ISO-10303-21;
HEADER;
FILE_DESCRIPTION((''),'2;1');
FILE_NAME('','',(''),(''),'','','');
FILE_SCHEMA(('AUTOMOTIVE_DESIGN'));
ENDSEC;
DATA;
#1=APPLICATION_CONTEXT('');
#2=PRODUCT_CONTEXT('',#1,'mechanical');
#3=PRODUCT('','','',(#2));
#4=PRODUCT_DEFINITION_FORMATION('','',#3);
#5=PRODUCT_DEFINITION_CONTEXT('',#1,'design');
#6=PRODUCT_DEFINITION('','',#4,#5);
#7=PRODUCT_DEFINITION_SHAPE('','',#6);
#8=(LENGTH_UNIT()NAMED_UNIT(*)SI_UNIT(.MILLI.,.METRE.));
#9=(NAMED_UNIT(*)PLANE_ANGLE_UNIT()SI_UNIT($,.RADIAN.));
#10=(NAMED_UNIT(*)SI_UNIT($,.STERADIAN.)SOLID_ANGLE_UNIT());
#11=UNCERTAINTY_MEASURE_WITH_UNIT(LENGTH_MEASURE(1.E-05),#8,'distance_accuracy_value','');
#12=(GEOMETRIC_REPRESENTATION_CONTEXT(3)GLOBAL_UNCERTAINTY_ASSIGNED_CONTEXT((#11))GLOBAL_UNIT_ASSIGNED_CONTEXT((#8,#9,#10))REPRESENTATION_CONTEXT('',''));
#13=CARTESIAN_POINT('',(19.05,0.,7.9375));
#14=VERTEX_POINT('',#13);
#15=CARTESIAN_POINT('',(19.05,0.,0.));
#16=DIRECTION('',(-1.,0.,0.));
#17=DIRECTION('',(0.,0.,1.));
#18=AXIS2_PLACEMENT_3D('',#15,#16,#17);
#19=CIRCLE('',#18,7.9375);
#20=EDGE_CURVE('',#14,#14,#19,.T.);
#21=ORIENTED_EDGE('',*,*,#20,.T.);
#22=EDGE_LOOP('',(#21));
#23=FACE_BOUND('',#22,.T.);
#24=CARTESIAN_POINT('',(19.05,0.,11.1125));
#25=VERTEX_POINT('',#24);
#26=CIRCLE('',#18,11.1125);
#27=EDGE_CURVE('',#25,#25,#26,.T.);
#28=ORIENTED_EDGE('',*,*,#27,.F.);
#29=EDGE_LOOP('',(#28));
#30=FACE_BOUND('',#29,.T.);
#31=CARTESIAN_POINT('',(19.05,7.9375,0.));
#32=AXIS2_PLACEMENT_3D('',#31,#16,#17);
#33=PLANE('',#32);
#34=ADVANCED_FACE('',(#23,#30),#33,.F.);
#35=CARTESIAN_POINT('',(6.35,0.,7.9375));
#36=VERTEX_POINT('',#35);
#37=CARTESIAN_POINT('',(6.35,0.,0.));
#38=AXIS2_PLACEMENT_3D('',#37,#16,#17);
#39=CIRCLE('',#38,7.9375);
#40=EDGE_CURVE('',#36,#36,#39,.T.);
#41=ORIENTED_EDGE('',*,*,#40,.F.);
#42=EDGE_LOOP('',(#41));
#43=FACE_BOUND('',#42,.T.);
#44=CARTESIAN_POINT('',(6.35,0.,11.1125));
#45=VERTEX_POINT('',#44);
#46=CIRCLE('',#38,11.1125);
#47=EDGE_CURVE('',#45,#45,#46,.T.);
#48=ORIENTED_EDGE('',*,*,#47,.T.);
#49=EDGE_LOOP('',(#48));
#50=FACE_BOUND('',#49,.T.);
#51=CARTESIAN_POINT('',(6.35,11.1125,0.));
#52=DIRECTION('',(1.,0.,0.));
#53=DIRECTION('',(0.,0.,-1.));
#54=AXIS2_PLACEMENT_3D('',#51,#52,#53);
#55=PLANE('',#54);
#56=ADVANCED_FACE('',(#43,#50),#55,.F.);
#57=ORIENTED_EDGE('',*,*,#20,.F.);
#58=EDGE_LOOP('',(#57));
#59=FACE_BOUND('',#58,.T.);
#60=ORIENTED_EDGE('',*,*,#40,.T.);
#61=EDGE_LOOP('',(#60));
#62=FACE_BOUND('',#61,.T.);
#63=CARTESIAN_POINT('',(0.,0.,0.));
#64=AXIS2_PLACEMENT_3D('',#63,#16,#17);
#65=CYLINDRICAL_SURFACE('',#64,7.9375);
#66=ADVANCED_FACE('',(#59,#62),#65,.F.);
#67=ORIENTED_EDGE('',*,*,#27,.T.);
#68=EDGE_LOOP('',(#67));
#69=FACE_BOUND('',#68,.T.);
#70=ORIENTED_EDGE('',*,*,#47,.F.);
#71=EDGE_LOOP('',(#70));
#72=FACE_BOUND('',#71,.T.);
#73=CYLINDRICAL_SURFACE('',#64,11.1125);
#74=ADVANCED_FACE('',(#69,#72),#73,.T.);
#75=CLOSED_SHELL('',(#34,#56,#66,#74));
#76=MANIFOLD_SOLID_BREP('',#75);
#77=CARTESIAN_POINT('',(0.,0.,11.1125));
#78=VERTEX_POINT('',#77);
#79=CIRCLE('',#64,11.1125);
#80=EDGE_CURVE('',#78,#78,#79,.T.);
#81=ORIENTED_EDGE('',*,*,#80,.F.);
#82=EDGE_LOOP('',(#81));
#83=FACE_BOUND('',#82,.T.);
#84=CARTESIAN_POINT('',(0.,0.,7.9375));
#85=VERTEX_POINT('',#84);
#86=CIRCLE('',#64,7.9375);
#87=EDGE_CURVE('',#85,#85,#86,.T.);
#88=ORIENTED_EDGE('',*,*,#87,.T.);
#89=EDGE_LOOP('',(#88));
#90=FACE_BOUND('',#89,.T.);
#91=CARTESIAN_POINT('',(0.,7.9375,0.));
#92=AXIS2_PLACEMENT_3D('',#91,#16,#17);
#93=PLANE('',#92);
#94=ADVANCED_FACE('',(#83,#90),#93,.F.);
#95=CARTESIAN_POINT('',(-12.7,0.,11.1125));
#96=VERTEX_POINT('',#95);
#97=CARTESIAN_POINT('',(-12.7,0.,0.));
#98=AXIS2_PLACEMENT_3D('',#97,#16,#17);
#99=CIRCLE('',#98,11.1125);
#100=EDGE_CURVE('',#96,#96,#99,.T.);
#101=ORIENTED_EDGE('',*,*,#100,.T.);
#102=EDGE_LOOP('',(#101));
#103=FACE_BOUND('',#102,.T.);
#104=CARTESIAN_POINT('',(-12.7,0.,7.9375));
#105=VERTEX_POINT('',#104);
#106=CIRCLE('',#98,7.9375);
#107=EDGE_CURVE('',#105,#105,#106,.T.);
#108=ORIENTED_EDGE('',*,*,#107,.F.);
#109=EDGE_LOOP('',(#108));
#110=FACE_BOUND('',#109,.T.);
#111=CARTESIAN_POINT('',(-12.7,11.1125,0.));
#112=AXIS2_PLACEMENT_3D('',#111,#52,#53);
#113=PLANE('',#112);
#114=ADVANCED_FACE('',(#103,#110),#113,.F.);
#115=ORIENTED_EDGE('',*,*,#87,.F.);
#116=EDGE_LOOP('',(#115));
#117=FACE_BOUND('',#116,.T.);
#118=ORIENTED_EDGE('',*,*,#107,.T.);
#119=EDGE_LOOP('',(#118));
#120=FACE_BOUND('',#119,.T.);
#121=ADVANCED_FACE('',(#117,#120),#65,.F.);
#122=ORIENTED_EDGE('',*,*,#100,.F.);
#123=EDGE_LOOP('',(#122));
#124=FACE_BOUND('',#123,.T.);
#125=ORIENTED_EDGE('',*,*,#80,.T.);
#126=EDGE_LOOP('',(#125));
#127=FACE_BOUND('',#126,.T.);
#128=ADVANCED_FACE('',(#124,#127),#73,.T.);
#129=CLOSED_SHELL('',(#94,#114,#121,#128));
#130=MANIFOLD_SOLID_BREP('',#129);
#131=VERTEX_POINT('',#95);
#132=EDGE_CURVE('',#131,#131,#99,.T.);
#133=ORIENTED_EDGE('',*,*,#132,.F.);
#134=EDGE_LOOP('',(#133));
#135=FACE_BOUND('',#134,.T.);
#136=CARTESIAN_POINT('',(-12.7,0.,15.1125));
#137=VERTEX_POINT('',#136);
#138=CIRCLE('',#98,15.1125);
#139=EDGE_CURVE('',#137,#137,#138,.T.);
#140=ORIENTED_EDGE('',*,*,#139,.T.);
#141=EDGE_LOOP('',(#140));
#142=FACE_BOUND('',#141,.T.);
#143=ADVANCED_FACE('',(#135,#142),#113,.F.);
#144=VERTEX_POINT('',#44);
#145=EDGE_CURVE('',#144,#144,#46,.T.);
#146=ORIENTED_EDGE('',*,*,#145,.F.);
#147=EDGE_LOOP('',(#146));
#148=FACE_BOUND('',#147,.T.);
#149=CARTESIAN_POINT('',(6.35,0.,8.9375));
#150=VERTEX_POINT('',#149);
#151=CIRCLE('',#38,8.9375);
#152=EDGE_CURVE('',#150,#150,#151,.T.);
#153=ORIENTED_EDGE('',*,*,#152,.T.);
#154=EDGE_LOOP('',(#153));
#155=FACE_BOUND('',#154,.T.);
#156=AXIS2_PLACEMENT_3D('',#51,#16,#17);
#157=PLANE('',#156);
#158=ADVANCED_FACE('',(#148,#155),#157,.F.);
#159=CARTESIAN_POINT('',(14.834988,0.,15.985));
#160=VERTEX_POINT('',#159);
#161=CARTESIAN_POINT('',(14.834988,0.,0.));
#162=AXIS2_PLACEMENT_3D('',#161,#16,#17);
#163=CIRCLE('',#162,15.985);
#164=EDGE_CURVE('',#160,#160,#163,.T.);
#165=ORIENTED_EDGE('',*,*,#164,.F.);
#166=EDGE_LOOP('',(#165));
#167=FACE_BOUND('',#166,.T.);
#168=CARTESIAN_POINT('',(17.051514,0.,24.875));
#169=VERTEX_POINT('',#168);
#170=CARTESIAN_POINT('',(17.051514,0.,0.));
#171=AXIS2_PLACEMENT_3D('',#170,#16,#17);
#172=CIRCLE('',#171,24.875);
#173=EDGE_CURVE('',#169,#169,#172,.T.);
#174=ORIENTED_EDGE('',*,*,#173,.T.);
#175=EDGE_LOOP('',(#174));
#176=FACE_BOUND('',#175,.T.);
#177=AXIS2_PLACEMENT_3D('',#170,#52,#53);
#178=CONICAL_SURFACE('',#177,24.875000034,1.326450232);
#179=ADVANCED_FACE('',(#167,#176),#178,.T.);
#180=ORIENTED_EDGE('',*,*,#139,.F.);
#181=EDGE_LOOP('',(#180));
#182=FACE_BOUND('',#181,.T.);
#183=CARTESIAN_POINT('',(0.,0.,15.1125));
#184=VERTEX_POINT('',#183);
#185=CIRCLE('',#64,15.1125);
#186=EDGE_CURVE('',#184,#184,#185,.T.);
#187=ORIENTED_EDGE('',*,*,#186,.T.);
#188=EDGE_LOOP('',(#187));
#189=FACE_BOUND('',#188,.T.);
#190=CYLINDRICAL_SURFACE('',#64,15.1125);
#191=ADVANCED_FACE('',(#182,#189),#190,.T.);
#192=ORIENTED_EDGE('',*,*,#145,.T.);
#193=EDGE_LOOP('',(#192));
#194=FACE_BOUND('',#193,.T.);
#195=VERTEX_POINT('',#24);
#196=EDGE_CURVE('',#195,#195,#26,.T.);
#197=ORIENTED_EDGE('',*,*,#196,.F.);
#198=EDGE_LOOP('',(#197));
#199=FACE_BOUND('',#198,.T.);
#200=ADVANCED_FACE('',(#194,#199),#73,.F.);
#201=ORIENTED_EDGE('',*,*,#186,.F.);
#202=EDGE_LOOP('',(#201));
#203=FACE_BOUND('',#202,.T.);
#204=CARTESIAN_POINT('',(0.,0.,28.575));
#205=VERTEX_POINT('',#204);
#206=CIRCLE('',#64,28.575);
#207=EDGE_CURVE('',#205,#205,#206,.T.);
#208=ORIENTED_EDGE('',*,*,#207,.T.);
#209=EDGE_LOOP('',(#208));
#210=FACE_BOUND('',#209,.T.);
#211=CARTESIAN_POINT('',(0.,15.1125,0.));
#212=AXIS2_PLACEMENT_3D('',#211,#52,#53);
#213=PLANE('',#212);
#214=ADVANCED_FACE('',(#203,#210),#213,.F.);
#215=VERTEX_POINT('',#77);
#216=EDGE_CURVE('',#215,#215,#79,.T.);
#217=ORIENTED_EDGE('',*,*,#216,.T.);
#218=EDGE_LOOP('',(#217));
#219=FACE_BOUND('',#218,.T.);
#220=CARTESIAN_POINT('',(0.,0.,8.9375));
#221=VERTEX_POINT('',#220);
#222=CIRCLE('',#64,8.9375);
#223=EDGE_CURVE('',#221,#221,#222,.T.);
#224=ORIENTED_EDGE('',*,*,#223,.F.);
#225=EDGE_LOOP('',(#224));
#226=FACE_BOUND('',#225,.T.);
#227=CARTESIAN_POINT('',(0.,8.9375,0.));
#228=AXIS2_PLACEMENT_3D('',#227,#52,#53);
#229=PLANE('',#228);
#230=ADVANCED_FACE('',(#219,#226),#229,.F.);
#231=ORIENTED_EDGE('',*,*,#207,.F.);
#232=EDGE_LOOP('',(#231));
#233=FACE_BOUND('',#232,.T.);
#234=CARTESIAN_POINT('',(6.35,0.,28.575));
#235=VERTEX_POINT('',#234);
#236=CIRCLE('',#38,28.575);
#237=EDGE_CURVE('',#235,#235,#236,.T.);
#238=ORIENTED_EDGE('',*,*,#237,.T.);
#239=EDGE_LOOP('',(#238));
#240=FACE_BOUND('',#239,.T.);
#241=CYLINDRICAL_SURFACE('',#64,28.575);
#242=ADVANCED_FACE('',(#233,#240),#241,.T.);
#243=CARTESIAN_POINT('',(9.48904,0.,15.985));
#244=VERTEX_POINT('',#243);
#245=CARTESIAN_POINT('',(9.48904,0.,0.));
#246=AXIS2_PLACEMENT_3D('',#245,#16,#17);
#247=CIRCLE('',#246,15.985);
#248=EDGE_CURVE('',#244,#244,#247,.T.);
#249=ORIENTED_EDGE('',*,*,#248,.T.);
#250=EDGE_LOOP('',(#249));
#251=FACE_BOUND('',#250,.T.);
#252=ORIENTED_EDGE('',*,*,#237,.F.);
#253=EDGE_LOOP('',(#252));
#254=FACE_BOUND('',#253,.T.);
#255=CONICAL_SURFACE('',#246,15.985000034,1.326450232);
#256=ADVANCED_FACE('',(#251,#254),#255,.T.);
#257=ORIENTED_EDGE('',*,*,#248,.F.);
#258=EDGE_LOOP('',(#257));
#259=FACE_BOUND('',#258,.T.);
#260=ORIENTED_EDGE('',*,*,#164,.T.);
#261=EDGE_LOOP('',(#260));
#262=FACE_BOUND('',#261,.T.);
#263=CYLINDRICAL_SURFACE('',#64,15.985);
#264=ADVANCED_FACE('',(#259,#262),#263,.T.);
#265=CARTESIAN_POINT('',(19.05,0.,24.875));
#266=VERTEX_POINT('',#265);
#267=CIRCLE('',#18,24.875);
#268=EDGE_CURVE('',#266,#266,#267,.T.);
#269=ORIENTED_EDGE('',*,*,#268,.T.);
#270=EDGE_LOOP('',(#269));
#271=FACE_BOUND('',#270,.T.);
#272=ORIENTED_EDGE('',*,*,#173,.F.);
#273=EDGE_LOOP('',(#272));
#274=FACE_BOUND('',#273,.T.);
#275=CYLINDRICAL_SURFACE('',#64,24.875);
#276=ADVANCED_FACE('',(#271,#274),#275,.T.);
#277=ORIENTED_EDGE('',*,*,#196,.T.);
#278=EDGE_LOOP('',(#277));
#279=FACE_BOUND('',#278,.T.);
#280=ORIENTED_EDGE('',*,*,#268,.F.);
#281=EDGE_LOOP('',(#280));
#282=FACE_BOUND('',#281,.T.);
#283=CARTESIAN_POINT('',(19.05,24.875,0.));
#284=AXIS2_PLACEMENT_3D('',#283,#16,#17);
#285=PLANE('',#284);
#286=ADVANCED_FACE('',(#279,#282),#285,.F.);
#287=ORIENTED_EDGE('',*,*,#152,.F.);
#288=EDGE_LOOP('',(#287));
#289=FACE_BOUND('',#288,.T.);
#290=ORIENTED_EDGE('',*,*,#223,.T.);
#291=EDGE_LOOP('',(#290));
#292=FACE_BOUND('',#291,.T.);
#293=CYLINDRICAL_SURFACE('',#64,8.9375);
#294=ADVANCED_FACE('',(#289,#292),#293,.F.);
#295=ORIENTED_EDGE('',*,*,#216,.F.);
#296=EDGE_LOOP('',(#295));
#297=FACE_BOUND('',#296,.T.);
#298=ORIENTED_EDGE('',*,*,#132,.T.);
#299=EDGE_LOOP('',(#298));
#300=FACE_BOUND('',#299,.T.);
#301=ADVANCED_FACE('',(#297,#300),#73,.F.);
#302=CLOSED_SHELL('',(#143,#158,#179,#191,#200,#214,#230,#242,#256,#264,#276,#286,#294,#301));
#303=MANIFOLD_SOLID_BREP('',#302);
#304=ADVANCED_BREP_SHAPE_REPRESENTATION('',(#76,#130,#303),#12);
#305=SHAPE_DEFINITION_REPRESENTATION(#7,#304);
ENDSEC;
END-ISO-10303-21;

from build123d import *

# Parameters (mm, degrees)
SKETCH5_W = 12.7
SKETCH5_H = 3.175


# Read off the part's stored shape, not the designer's step: Revolve1
with BuildPart() as part:
    # Revolve1 outline → Revolve1 (revolve)
    with BuildSketch(Plane.YX):
        Polygon((11.1125, 0), (11.1125, -12.7), (15.112500017, -12.7), (15.112500017, 0), (28.575, 0), (28.575, 6.35), (15.985000034, 9.489039547), (15.985000034, 14.834987657), (24.875000034, 17.051513602), (24.875000034, 19.05), (11.1125, 19.05), (11.1125, 6.35), (8.9375, 6.35), (8.9375, 0), align=None)
    revolve(axis=Axis((0, 0, 0), (1, 0, 0)))


with BuildPart() as body_2:
    # Sketch5 → Revolve2 (revolve)
    with BuildSketch(Plane.XY, mode=Mode.PRIVATE) as revolve2_sk:
        with Locations((12.7, 9.525)):
            Rectangle(SKETCH5_W, SKETCH5_H)
        with Locations((-6.35, 9.525)):
            Rectangle(SKETCH5_W, SKETCH5_H)
    revolve(revolve2_sk.sketch.rotate(Axis((0, 0, 0), (1, 0, 0)), 90), axis=Axis((0, 0, 0), (1, 0, 0)))


solid = Compound([part.part, body_2.part])
